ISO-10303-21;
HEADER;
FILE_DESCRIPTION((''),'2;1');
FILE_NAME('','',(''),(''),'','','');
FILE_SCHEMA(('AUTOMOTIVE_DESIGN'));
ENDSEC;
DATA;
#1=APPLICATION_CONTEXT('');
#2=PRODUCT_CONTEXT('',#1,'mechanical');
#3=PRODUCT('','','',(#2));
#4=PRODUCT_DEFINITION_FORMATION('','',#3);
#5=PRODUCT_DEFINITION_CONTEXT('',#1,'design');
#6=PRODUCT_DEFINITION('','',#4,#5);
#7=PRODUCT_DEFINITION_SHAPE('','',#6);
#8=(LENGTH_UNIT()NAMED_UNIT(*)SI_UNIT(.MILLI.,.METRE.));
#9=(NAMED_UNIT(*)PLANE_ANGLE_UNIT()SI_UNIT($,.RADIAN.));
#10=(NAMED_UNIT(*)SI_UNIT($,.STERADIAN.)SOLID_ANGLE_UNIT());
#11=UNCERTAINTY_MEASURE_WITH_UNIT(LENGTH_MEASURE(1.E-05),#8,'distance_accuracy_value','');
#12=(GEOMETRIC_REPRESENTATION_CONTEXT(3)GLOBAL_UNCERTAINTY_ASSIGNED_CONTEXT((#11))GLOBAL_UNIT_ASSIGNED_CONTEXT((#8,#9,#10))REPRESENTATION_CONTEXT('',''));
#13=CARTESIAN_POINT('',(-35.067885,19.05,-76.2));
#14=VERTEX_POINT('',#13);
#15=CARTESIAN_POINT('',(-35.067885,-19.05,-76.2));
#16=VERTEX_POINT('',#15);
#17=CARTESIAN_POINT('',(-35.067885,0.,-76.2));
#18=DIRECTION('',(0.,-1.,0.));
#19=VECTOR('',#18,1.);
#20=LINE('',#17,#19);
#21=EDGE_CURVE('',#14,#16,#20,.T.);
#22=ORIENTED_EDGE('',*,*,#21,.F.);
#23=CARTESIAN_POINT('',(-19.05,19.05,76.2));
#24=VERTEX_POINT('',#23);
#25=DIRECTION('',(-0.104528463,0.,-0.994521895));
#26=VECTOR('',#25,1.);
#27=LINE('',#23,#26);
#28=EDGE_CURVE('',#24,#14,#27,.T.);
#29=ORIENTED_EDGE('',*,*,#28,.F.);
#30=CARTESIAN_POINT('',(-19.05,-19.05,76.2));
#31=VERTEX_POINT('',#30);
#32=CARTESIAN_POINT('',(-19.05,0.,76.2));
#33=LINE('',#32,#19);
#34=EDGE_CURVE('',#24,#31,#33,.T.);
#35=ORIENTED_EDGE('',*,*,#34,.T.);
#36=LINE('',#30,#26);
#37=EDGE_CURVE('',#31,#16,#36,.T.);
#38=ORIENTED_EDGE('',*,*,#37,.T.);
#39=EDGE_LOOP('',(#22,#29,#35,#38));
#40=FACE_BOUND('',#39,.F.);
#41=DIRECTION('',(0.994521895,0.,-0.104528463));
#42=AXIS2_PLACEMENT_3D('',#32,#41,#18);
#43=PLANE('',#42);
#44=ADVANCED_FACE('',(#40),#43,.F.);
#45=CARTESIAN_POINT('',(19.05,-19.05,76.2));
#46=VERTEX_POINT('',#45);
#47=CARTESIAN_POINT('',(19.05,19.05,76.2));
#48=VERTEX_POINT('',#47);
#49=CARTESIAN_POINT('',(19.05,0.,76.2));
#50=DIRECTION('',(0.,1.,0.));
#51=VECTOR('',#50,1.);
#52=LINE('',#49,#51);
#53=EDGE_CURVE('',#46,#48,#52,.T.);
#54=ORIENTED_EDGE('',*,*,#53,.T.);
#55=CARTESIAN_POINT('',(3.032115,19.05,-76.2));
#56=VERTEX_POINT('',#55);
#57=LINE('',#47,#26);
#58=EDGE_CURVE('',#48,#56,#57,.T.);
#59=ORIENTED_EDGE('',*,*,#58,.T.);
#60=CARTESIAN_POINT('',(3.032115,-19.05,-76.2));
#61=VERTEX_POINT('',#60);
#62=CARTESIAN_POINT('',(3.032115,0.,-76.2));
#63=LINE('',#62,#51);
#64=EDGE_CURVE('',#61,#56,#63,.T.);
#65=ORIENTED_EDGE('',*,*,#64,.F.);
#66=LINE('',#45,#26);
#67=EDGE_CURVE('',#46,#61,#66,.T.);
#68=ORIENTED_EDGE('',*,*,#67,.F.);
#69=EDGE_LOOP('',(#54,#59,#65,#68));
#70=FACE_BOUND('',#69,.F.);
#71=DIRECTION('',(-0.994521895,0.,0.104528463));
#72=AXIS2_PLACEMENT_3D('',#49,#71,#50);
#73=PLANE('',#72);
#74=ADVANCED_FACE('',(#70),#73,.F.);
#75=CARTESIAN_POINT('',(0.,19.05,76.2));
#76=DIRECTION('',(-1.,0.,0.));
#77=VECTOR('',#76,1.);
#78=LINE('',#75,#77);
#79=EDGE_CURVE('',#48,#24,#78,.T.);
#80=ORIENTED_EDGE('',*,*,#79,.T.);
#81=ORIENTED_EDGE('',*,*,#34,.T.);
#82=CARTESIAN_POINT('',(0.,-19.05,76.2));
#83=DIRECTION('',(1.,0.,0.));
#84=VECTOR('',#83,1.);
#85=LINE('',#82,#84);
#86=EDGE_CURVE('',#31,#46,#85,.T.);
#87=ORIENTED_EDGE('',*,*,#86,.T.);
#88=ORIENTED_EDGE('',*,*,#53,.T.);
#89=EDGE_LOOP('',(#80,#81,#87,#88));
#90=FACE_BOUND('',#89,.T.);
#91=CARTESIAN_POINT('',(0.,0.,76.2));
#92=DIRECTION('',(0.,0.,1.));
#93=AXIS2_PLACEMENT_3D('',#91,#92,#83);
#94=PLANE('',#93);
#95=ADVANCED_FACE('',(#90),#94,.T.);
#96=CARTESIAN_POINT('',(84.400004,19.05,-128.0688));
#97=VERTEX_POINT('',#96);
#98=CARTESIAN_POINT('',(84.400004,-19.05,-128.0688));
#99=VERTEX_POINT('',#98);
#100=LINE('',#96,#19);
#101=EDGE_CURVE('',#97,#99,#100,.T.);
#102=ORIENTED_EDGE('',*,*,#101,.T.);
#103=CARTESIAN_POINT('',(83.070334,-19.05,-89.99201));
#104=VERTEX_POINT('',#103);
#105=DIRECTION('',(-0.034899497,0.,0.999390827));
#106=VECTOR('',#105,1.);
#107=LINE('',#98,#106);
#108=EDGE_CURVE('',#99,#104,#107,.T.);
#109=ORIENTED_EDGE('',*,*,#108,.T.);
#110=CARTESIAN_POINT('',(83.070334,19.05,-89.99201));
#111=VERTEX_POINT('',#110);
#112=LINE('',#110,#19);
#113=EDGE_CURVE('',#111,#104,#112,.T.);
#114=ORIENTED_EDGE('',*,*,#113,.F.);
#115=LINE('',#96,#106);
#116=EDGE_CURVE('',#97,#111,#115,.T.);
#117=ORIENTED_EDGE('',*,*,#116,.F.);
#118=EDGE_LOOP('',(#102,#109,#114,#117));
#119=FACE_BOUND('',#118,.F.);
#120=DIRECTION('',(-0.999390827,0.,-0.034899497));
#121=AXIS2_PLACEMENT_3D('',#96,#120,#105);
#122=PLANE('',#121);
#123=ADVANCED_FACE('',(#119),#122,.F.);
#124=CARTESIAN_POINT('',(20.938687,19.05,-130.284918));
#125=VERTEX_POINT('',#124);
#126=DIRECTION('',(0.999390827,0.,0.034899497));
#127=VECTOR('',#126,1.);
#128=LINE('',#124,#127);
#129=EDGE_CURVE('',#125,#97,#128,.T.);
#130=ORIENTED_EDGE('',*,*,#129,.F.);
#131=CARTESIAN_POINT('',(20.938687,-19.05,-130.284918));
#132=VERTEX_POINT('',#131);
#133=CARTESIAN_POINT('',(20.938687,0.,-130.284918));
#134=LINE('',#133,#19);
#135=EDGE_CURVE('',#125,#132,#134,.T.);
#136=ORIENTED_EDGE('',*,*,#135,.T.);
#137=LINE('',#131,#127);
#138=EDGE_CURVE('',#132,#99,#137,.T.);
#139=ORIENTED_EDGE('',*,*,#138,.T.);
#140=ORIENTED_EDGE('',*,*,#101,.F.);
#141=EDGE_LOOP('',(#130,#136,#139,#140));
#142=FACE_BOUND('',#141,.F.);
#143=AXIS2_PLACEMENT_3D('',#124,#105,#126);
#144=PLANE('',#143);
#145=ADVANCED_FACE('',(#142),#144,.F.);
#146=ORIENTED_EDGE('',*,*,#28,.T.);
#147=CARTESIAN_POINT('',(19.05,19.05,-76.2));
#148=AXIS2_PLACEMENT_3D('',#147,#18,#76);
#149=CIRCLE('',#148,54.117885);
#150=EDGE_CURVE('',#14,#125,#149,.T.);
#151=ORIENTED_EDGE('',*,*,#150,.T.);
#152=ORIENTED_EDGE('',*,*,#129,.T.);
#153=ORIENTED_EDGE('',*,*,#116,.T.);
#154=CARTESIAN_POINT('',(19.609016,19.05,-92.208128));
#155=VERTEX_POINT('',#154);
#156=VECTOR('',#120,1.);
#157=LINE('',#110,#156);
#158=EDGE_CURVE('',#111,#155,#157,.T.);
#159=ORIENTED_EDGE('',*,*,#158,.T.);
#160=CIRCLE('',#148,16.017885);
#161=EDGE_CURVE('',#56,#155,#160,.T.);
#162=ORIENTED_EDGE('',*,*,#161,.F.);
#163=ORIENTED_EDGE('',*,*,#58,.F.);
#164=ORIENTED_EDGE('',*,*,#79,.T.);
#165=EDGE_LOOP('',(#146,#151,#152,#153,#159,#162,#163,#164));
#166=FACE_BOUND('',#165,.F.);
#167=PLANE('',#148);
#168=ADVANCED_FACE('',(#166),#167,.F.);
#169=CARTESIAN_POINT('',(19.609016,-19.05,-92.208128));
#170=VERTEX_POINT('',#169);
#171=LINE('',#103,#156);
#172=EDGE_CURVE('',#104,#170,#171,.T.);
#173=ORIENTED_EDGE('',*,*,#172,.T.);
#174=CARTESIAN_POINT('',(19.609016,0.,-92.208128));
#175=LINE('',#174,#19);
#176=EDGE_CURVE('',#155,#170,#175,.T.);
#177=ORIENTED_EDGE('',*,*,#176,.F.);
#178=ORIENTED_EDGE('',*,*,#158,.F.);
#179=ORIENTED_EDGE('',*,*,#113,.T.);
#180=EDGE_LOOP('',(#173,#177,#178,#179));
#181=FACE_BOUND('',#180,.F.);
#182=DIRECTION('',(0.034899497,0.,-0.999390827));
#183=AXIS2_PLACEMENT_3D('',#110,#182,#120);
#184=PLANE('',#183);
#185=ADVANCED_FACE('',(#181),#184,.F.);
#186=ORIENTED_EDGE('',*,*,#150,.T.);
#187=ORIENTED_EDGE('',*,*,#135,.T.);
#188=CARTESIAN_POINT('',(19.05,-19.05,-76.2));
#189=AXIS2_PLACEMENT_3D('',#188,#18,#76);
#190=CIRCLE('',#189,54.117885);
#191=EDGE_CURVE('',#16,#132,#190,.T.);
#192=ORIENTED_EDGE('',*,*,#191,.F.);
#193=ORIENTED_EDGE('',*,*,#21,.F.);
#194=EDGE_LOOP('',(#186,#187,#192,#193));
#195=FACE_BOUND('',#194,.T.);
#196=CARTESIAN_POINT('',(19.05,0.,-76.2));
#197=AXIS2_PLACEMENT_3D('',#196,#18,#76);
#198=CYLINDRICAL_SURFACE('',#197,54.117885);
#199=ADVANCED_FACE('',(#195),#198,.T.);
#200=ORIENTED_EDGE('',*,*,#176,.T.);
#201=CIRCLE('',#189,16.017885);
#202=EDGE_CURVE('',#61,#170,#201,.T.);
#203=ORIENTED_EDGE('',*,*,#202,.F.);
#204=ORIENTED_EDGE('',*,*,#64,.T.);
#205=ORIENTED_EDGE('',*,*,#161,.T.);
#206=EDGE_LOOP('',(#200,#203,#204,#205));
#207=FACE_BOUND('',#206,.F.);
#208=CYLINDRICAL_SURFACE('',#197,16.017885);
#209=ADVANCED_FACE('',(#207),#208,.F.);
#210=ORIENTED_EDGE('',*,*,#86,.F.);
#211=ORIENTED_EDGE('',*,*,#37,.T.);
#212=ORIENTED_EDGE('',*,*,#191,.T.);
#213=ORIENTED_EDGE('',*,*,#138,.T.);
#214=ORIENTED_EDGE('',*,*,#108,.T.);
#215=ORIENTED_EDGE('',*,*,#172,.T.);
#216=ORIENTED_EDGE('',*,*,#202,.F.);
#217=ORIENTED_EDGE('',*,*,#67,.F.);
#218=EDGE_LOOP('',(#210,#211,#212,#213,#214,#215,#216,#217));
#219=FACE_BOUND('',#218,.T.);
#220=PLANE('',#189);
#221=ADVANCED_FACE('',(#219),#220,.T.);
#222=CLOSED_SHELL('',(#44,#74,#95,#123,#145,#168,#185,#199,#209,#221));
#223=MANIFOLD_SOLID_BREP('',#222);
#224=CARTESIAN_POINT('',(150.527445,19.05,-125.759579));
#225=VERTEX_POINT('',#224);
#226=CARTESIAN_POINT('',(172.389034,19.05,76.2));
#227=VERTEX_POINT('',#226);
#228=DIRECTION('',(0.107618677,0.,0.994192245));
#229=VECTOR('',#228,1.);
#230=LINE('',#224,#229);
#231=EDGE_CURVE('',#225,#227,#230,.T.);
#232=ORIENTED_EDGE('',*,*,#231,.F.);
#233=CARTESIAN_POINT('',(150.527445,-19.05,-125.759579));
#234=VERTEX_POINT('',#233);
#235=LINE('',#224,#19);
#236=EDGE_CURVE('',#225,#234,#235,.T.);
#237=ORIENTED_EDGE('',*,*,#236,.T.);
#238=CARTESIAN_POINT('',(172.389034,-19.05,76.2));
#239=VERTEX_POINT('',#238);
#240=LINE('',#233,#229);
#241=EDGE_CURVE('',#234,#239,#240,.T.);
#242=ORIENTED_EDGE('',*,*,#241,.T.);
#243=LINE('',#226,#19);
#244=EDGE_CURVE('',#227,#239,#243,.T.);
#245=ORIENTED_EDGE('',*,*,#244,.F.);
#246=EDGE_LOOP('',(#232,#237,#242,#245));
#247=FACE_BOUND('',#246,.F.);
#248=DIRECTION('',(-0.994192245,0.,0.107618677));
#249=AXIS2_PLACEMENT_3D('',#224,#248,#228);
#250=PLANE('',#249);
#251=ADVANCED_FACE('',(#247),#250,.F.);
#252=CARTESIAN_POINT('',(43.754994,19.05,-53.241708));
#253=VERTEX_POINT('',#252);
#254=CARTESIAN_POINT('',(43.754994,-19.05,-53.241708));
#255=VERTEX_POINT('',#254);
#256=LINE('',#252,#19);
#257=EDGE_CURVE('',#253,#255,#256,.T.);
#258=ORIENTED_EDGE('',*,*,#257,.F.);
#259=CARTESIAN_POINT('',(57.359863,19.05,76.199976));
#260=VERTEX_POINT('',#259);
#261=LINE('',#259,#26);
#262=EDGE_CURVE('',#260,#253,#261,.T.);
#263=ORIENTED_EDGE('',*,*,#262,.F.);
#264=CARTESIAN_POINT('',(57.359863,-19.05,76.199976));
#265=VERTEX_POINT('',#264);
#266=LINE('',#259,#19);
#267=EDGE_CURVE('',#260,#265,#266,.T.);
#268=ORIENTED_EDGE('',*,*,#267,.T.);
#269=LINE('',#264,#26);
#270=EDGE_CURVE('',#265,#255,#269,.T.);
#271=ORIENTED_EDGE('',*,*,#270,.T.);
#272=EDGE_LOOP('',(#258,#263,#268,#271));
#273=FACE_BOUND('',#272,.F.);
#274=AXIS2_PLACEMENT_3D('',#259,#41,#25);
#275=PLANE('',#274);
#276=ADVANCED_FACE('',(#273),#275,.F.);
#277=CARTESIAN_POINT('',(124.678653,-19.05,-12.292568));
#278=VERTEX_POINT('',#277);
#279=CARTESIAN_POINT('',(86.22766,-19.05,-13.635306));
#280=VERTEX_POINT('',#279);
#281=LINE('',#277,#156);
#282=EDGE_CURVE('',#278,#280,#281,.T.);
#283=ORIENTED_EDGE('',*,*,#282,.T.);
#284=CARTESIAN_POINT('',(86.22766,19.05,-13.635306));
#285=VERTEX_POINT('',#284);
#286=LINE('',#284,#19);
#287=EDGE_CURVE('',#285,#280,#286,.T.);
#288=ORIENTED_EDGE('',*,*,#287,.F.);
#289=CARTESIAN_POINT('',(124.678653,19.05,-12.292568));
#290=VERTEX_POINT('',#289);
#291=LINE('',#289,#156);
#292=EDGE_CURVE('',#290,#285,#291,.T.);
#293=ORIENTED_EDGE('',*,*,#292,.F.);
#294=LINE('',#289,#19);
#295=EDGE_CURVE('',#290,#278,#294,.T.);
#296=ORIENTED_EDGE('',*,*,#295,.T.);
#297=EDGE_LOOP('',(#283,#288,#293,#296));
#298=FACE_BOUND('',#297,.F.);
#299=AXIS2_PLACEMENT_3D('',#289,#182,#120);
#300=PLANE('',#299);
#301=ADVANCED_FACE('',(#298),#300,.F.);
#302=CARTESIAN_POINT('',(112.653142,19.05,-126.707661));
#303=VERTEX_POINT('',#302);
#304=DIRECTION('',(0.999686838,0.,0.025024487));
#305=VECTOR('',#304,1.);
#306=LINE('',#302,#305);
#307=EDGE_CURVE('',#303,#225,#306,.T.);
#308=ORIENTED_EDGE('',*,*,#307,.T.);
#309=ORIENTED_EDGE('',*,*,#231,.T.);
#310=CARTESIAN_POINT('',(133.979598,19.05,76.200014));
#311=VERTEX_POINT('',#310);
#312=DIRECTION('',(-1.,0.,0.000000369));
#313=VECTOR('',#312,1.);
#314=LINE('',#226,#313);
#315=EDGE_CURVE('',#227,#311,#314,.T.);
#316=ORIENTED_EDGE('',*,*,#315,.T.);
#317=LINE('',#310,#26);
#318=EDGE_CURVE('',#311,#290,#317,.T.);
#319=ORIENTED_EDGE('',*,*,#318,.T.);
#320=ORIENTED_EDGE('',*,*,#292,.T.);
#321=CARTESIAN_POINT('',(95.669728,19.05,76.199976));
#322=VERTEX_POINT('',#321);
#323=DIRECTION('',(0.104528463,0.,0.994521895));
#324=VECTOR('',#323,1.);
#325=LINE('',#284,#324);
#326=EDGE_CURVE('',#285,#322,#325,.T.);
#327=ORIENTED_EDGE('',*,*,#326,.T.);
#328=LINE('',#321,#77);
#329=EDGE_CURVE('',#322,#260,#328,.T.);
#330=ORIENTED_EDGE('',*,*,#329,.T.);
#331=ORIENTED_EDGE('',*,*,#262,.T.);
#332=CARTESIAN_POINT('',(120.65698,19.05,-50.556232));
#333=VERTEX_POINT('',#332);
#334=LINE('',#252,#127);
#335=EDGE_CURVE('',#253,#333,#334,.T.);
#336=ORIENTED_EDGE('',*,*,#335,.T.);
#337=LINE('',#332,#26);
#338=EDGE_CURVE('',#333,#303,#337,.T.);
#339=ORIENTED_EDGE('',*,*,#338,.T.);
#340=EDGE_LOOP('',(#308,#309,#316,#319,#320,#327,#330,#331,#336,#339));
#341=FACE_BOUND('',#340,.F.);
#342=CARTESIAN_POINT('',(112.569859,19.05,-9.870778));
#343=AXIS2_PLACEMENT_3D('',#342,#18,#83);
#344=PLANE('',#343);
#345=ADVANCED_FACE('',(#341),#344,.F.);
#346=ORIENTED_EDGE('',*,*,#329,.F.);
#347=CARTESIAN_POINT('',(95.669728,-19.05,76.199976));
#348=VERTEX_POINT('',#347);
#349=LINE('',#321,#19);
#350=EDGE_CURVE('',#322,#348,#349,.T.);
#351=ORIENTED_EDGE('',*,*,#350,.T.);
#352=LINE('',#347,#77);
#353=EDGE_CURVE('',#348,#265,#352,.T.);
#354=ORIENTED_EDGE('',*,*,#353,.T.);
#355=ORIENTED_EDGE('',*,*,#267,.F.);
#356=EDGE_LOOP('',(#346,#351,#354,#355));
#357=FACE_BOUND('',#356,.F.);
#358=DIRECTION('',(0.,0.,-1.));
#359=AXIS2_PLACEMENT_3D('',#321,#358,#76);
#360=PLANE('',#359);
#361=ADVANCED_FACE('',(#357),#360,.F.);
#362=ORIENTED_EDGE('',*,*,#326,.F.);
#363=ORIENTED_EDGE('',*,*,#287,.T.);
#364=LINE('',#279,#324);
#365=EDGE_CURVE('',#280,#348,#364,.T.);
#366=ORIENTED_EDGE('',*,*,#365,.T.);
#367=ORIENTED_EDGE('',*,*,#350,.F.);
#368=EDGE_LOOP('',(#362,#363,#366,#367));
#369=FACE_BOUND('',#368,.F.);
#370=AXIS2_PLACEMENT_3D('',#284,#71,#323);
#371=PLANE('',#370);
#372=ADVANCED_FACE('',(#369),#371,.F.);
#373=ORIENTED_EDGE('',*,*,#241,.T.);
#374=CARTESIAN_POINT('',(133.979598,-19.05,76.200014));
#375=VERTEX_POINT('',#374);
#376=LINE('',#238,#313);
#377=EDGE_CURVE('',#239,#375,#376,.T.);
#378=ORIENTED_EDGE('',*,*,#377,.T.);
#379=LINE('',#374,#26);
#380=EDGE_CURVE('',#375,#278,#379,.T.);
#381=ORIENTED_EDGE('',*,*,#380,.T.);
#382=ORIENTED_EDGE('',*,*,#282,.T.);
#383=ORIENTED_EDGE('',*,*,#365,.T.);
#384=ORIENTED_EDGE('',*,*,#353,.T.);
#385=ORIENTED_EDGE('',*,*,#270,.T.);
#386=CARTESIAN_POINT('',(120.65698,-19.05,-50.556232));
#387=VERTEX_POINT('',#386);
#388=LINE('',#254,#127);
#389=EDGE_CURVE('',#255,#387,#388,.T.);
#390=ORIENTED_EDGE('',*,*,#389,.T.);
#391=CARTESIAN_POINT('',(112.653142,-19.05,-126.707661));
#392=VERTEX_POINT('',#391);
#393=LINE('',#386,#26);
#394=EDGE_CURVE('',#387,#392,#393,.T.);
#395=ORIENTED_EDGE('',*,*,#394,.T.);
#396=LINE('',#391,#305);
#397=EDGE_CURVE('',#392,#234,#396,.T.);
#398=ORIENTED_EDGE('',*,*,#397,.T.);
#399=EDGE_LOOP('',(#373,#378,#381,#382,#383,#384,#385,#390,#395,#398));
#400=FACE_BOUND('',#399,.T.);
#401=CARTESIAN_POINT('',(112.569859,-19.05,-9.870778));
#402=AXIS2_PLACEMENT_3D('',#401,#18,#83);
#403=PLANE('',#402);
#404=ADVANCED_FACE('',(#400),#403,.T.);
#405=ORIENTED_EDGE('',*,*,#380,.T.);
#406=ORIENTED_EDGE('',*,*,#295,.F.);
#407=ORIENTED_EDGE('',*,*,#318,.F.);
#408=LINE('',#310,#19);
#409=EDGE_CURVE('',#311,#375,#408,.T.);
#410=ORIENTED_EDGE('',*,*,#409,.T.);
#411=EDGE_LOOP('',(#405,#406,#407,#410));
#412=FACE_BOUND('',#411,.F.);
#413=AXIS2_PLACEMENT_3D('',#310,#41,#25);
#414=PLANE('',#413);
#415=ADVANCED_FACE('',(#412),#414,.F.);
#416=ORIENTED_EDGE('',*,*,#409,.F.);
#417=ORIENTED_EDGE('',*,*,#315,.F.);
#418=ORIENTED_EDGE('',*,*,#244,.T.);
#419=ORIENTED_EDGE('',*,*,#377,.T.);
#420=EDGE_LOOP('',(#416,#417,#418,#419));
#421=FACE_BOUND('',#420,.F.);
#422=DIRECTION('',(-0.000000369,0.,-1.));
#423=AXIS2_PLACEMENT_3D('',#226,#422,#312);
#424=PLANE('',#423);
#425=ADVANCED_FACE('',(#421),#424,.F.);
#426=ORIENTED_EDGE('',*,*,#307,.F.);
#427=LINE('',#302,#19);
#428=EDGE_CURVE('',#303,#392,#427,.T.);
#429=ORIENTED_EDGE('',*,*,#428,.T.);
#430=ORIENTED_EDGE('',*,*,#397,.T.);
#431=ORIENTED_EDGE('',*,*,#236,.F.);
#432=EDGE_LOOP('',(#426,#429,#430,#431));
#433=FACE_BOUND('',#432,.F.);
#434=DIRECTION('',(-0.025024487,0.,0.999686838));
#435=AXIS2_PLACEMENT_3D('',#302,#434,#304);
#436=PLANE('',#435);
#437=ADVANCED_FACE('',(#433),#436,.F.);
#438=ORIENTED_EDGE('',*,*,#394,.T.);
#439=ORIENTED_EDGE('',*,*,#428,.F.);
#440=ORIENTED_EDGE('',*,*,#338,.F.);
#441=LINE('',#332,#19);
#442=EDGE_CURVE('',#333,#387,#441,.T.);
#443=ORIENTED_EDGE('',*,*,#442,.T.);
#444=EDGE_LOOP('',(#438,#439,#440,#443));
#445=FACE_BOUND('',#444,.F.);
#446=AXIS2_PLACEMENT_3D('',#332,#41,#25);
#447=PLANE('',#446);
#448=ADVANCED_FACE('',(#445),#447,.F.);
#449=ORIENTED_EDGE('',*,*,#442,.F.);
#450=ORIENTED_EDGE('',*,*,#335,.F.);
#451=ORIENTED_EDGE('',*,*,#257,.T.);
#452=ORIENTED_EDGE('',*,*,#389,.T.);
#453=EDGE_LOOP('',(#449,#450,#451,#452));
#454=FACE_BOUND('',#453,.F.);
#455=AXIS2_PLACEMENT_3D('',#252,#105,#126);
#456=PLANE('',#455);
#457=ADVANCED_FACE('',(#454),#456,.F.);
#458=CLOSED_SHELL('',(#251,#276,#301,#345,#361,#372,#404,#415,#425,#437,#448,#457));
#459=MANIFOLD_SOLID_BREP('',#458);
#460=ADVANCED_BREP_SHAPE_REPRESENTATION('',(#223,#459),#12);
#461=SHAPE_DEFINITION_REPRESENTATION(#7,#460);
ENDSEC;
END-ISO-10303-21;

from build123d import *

# Parameters (mm, degrees)
F2_W      = 38.1
F2_H      = 38.1
F3_FACE_W = 38.1
F3_FACE_H = 38.1
F6_ANGLE  = 92
F10_DEPTH = 38.1


# Not quite as in the source:
# - a feature of the source that left no trace in its solid (it failed there, or was rolled back) is left out


with BuildPart() as f3:
    # F3: sweep along a path in F1
    with BuildLine(Plane.XZ) as f3_path:
        Line((0, 76.2), (-16.0178854545, -76.2))
    # F2 (on offset) → F3 (sweep)
    with BuildSketch(Plane.XY.offset(76.2)):
        Rectangle(F2_W, F2_H)
    sweep(path=f3_path.line)

    # F3_face (on face) → F6 (revolve)
    with BuildSketch(Plane(origin=(-16.0178854545, 0, -76.2), x_dir=(1, 0, 0), z_dir=(0, 0, -1))):
        Rectangle(F3_FACE_W, F3_FACE_H)
    revolve(axis=Axis((19.05, 0, -76.2), (0, -1, 0)), revolution_arc=F6_ANGLE)

    # F9 (on offset) → F10 (join)
    with BuildSketch(Plane.XZ.offset(-19.05)):
        with BuildLine():
            Line((19.05, 76.2), (-19.05, 76.2))
            Line((-19.05, 76.2), (-35.0678854545, -76.2))
            ThreePointArc((-35.0678854545, -76.2), (-18.5434421225, -115.1291489176), (20.938686965, -130.2849183009))
            Line((20.938686965, -130.2849183009), (84.4000044807, -128.0688002603))
            Line((84.4000044807, -128.0688002603), (83.0703336563, -89.9920097509))
            Line((83.0703336563, -89.9920097509), (19.6090161406, -92.2081277915))
            ThreePointArc((19.6090161406, -92.2081277915), (7.923041792, -87.7223025247), (3.0321145455, -76.2))
            Line((3.0321145455, -76.2), (19.05, 76.2))
        make_face()
    extrude(amount=F10_DEPTH)


with BuildPart() as f10:
    # F9 (on offset) → F10, piece 2 (new body)
    with BuildSketch(Plane.XZ.offset(-19.05)):
        Polygon((57.3598628922, 76.1999756512), (48.2847232605, -10.1442102778), (43.7549937167, -53.2417080366), (120.6569795756, -50.556231515), (112.6531418084, -126.7076610645), (150.5274446174, -125.7595791662), (172.3890340576, 76.2), (133.9795978448, 76.2000141826), (124.6786526722, -12.292567958), (86.2276597428, -13.6353062188), (95.6697283436, 76.1999756512), align=None)
    extrude(amount=F10_DEPTH)


solid = Compound([f3.part, f10.part])
